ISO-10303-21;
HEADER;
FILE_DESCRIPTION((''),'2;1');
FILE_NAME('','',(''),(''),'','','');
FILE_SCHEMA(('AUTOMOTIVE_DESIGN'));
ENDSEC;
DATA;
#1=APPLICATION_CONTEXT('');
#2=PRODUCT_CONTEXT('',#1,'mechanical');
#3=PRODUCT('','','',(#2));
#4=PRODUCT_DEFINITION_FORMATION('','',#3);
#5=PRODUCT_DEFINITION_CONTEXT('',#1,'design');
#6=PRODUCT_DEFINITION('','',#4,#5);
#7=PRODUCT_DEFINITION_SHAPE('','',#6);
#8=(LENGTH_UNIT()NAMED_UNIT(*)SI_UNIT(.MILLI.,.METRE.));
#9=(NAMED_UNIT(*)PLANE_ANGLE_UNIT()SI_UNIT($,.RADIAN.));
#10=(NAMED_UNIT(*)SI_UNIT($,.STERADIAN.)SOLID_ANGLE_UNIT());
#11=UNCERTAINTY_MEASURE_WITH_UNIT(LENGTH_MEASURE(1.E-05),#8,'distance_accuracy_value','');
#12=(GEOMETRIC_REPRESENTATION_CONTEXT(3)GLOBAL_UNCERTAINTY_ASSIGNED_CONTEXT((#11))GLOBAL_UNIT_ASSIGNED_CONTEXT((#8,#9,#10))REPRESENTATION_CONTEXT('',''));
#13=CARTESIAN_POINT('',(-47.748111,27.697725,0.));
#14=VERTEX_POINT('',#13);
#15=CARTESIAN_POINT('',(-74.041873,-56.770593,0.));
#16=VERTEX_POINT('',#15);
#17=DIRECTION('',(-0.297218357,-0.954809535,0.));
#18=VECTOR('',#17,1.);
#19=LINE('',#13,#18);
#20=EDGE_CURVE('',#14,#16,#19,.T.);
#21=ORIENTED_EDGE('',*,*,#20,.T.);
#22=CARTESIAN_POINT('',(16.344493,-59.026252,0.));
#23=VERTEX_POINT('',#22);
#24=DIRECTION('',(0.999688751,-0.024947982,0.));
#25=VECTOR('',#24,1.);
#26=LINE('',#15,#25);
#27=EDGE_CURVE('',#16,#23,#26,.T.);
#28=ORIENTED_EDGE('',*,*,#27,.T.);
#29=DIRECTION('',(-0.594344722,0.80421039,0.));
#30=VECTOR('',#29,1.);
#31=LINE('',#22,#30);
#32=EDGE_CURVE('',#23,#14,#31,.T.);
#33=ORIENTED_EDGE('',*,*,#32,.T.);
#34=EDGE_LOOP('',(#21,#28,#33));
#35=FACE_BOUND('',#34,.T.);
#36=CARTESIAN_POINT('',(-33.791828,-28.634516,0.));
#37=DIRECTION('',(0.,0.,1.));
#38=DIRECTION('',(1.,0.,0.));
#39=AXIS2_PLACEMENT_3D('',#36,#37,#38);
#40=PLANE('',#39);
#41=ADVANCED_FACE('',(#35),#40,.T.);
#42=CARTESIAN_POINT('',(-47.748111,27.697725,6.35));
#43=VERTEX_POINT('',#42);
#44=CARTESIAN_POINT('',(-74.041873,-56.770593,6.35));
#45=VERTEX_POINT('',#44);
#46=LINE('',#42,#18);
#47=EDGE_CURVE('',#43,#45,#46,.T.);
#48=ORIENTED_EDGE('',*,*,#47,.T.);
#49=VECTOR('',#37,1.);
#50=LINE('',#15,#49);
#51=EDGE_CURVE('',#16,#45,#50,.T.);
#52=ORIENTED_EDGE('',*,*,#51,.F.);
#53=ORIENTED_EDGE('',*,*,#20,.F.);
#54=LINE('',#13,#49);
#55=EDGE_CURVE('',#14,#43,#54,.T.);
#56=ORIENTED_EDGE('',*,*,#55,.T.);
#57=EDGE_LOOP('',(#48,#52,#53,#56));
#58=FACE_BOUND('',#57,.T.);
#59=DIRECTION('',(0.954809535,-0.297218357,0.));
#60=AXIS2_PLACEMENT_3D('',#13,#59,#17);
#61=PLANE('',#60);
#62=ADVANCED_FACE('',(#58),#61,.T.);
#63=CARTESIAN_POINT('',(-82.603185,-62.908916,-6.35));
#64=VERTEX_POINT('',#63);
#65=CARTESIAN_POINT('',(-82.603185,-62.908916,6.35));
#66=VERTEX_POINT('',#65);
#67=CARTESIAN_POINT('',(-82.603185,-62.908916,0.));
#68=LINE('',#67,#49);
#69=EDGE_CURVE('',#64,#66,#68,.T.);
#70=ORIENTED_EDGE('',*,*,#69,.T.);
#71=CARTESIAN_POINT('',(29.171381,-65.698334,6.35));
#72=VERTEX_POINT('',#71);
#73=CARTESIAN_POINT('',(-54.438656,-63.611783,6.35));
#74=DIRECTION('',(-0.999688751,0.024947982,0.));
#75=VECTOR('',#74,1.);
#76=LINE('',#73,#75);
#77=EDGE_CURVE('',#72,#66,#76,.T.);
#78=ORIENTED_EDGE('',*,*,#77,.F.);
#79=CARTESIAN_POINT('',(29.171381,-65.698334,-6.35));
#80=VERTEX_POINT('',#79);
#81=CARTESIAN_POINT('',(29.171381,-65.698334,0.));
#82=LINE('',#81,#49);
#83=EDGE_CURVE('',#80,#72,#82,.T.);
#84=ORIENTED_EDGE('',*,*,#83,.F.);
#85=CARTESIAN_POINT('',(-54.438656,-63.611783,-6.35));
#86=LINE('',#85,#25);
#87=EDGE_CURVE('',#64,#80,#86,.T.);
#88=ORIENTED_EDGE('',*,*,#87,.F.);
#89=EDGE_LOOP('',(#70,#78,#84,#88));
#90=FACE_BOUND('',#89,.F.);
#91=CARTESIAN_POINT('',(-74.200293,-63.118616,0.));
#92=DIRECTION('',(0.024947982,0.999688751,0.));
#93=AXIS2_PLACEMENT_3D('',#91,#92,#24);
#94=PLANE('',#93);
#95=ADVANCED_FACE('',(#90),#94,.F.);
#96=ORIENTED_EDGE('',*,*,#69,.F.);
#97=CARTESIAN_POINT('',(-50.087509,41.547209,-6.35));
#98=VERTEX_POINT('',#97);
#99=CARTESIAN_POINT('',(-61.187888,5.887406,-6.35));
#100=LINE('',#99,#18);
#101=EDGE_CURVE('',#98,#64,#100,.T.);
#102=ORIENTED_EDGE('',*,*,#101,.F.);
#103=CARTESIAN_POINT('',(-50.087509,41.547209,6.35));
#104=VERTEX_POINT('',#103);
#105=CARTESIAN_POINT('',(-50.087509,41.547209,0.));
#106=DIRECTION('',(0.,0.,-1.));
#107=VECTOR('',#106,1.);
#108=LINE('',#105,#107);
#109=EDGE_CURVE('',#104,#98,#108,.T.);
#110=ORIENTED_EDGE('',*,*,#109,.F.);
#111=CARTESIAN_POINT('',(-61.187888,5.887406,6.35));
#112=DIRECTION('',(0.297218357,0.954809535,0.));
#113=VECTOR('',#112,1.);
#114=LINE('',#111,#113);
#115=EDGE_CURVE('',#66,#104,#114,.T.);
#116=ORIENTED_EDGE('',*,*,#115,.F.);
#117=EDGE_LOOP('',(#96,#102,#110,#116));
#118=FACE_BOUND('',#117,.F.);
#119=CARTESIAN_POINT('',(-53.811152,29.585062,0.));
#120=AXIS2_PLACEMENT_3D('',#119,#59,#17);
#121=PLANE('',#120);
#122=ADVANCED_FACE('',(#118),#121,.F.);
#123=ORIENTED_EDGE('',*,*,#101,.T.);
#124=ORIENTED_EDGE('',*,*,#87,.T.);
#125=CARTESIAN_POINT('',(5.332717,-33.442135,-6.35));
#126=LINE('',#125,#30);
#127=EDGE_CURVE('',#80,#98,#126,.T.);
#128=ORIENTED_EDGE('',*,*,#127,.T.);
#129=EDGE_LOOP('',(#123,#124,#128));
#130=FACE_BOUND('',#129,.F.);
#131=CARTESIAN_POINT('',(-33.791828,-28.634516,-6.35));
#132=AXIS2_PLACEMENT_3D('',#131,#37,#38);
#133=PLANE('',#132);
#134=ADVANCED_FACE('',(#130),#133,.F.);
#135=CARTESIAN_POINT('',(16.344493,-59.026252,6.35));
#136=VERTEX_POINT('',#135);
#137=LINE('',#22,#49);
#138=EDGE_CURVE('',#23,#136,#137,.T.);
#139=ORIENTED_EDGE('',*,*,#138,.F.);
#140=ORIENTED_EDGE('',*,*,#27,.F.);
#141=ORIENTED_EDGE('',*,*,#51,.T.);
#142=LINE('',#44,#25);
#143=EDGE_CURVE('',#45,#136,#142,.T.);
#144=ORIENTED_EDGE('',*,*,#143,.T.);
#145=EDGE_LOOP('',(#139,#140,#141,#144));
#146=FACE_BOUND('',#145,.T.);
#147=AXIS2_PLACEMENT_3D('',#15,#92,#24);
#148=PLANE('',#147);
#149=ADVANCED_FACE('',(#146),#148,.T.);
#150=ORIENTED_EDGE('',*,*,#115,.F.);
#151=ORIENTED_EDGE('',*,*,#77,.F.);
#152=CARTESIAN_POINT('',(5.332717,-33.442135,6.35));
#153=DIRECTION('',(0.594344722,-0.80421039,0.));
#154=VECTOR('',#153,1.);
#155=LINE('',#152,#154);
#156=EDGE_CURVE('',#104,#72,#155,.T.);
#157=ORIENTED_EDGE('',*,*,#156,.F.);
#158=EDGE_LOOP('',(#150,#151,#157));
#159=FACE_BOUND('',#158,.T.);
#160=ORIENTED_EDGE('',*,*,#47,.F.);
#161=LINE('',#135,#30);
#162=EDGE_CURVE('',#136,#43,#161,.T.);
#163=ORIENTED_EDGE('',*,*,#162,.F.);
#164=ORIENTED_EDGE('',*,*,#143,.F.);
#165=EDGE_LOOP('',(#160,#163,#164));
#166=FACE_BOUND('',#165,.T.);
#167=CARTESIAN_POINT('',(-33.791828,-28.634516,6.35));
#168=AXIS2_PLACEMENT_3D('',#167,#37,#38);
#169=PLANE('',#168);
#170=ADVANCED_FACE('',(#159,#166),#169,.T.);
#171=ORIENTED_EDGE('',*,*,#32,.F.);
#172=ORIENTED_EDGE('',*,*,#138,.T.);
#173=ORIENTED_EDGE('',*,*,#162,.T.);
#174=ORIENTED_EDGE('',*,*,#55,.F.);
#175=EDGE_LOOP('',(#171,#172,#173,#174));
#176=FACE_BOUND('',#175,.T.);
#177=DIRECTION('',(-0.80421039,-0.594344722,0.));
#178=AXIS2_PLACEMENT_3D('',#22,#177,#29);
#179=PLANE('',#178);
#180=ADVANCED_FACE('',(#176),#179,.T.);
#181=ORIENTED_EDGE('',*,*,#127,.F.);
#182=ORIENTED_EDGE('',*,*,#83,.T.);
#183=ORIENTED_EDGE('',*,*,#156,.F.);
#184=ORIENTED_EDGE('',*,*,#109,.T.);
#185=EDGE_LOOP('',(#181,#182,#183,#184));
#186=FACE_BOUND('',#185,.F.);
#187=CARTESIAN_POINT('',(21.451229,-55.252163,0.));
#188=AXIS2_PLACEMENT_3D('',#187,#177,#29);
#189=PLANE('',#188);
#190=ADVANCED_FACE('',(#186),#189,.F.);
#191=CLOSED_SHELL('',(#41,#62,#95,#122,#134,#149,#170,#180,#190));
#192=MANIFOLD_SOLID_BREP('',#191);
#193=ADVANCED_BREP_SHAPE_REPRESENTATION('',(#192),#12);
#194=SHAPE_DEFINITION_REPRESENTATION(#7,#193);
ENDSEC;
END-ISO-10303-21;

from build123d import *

# Parameters (mm, degrees)
F1_DEPTH = 6.35
F3_T     = 6.35


# Not quite as in the source:
# - a feature names something its author has since deleted; it is built from what else it names


with BuildPart() as f1:
    # F0 (on Top) → F1 (new body)
    with BuildSketch(Plane.XY):
        Polygon((-47.7481111884, 27.6977252215), (-74.0418732166, -56.7705929279), (16.344493255, -59.0262524784), align=None)
    extrude(amount=F1_DEPTH)

    # F3
    f3_openings = [f1.faces().sort_by_distance(p)[0] for p in [
        (-35.148497, -29.366373, 6.35),
    ]]
    offset(amount=F3_T, openings=f3_openings, kind=Kind.INTERSECTION)


solid = f1.part
